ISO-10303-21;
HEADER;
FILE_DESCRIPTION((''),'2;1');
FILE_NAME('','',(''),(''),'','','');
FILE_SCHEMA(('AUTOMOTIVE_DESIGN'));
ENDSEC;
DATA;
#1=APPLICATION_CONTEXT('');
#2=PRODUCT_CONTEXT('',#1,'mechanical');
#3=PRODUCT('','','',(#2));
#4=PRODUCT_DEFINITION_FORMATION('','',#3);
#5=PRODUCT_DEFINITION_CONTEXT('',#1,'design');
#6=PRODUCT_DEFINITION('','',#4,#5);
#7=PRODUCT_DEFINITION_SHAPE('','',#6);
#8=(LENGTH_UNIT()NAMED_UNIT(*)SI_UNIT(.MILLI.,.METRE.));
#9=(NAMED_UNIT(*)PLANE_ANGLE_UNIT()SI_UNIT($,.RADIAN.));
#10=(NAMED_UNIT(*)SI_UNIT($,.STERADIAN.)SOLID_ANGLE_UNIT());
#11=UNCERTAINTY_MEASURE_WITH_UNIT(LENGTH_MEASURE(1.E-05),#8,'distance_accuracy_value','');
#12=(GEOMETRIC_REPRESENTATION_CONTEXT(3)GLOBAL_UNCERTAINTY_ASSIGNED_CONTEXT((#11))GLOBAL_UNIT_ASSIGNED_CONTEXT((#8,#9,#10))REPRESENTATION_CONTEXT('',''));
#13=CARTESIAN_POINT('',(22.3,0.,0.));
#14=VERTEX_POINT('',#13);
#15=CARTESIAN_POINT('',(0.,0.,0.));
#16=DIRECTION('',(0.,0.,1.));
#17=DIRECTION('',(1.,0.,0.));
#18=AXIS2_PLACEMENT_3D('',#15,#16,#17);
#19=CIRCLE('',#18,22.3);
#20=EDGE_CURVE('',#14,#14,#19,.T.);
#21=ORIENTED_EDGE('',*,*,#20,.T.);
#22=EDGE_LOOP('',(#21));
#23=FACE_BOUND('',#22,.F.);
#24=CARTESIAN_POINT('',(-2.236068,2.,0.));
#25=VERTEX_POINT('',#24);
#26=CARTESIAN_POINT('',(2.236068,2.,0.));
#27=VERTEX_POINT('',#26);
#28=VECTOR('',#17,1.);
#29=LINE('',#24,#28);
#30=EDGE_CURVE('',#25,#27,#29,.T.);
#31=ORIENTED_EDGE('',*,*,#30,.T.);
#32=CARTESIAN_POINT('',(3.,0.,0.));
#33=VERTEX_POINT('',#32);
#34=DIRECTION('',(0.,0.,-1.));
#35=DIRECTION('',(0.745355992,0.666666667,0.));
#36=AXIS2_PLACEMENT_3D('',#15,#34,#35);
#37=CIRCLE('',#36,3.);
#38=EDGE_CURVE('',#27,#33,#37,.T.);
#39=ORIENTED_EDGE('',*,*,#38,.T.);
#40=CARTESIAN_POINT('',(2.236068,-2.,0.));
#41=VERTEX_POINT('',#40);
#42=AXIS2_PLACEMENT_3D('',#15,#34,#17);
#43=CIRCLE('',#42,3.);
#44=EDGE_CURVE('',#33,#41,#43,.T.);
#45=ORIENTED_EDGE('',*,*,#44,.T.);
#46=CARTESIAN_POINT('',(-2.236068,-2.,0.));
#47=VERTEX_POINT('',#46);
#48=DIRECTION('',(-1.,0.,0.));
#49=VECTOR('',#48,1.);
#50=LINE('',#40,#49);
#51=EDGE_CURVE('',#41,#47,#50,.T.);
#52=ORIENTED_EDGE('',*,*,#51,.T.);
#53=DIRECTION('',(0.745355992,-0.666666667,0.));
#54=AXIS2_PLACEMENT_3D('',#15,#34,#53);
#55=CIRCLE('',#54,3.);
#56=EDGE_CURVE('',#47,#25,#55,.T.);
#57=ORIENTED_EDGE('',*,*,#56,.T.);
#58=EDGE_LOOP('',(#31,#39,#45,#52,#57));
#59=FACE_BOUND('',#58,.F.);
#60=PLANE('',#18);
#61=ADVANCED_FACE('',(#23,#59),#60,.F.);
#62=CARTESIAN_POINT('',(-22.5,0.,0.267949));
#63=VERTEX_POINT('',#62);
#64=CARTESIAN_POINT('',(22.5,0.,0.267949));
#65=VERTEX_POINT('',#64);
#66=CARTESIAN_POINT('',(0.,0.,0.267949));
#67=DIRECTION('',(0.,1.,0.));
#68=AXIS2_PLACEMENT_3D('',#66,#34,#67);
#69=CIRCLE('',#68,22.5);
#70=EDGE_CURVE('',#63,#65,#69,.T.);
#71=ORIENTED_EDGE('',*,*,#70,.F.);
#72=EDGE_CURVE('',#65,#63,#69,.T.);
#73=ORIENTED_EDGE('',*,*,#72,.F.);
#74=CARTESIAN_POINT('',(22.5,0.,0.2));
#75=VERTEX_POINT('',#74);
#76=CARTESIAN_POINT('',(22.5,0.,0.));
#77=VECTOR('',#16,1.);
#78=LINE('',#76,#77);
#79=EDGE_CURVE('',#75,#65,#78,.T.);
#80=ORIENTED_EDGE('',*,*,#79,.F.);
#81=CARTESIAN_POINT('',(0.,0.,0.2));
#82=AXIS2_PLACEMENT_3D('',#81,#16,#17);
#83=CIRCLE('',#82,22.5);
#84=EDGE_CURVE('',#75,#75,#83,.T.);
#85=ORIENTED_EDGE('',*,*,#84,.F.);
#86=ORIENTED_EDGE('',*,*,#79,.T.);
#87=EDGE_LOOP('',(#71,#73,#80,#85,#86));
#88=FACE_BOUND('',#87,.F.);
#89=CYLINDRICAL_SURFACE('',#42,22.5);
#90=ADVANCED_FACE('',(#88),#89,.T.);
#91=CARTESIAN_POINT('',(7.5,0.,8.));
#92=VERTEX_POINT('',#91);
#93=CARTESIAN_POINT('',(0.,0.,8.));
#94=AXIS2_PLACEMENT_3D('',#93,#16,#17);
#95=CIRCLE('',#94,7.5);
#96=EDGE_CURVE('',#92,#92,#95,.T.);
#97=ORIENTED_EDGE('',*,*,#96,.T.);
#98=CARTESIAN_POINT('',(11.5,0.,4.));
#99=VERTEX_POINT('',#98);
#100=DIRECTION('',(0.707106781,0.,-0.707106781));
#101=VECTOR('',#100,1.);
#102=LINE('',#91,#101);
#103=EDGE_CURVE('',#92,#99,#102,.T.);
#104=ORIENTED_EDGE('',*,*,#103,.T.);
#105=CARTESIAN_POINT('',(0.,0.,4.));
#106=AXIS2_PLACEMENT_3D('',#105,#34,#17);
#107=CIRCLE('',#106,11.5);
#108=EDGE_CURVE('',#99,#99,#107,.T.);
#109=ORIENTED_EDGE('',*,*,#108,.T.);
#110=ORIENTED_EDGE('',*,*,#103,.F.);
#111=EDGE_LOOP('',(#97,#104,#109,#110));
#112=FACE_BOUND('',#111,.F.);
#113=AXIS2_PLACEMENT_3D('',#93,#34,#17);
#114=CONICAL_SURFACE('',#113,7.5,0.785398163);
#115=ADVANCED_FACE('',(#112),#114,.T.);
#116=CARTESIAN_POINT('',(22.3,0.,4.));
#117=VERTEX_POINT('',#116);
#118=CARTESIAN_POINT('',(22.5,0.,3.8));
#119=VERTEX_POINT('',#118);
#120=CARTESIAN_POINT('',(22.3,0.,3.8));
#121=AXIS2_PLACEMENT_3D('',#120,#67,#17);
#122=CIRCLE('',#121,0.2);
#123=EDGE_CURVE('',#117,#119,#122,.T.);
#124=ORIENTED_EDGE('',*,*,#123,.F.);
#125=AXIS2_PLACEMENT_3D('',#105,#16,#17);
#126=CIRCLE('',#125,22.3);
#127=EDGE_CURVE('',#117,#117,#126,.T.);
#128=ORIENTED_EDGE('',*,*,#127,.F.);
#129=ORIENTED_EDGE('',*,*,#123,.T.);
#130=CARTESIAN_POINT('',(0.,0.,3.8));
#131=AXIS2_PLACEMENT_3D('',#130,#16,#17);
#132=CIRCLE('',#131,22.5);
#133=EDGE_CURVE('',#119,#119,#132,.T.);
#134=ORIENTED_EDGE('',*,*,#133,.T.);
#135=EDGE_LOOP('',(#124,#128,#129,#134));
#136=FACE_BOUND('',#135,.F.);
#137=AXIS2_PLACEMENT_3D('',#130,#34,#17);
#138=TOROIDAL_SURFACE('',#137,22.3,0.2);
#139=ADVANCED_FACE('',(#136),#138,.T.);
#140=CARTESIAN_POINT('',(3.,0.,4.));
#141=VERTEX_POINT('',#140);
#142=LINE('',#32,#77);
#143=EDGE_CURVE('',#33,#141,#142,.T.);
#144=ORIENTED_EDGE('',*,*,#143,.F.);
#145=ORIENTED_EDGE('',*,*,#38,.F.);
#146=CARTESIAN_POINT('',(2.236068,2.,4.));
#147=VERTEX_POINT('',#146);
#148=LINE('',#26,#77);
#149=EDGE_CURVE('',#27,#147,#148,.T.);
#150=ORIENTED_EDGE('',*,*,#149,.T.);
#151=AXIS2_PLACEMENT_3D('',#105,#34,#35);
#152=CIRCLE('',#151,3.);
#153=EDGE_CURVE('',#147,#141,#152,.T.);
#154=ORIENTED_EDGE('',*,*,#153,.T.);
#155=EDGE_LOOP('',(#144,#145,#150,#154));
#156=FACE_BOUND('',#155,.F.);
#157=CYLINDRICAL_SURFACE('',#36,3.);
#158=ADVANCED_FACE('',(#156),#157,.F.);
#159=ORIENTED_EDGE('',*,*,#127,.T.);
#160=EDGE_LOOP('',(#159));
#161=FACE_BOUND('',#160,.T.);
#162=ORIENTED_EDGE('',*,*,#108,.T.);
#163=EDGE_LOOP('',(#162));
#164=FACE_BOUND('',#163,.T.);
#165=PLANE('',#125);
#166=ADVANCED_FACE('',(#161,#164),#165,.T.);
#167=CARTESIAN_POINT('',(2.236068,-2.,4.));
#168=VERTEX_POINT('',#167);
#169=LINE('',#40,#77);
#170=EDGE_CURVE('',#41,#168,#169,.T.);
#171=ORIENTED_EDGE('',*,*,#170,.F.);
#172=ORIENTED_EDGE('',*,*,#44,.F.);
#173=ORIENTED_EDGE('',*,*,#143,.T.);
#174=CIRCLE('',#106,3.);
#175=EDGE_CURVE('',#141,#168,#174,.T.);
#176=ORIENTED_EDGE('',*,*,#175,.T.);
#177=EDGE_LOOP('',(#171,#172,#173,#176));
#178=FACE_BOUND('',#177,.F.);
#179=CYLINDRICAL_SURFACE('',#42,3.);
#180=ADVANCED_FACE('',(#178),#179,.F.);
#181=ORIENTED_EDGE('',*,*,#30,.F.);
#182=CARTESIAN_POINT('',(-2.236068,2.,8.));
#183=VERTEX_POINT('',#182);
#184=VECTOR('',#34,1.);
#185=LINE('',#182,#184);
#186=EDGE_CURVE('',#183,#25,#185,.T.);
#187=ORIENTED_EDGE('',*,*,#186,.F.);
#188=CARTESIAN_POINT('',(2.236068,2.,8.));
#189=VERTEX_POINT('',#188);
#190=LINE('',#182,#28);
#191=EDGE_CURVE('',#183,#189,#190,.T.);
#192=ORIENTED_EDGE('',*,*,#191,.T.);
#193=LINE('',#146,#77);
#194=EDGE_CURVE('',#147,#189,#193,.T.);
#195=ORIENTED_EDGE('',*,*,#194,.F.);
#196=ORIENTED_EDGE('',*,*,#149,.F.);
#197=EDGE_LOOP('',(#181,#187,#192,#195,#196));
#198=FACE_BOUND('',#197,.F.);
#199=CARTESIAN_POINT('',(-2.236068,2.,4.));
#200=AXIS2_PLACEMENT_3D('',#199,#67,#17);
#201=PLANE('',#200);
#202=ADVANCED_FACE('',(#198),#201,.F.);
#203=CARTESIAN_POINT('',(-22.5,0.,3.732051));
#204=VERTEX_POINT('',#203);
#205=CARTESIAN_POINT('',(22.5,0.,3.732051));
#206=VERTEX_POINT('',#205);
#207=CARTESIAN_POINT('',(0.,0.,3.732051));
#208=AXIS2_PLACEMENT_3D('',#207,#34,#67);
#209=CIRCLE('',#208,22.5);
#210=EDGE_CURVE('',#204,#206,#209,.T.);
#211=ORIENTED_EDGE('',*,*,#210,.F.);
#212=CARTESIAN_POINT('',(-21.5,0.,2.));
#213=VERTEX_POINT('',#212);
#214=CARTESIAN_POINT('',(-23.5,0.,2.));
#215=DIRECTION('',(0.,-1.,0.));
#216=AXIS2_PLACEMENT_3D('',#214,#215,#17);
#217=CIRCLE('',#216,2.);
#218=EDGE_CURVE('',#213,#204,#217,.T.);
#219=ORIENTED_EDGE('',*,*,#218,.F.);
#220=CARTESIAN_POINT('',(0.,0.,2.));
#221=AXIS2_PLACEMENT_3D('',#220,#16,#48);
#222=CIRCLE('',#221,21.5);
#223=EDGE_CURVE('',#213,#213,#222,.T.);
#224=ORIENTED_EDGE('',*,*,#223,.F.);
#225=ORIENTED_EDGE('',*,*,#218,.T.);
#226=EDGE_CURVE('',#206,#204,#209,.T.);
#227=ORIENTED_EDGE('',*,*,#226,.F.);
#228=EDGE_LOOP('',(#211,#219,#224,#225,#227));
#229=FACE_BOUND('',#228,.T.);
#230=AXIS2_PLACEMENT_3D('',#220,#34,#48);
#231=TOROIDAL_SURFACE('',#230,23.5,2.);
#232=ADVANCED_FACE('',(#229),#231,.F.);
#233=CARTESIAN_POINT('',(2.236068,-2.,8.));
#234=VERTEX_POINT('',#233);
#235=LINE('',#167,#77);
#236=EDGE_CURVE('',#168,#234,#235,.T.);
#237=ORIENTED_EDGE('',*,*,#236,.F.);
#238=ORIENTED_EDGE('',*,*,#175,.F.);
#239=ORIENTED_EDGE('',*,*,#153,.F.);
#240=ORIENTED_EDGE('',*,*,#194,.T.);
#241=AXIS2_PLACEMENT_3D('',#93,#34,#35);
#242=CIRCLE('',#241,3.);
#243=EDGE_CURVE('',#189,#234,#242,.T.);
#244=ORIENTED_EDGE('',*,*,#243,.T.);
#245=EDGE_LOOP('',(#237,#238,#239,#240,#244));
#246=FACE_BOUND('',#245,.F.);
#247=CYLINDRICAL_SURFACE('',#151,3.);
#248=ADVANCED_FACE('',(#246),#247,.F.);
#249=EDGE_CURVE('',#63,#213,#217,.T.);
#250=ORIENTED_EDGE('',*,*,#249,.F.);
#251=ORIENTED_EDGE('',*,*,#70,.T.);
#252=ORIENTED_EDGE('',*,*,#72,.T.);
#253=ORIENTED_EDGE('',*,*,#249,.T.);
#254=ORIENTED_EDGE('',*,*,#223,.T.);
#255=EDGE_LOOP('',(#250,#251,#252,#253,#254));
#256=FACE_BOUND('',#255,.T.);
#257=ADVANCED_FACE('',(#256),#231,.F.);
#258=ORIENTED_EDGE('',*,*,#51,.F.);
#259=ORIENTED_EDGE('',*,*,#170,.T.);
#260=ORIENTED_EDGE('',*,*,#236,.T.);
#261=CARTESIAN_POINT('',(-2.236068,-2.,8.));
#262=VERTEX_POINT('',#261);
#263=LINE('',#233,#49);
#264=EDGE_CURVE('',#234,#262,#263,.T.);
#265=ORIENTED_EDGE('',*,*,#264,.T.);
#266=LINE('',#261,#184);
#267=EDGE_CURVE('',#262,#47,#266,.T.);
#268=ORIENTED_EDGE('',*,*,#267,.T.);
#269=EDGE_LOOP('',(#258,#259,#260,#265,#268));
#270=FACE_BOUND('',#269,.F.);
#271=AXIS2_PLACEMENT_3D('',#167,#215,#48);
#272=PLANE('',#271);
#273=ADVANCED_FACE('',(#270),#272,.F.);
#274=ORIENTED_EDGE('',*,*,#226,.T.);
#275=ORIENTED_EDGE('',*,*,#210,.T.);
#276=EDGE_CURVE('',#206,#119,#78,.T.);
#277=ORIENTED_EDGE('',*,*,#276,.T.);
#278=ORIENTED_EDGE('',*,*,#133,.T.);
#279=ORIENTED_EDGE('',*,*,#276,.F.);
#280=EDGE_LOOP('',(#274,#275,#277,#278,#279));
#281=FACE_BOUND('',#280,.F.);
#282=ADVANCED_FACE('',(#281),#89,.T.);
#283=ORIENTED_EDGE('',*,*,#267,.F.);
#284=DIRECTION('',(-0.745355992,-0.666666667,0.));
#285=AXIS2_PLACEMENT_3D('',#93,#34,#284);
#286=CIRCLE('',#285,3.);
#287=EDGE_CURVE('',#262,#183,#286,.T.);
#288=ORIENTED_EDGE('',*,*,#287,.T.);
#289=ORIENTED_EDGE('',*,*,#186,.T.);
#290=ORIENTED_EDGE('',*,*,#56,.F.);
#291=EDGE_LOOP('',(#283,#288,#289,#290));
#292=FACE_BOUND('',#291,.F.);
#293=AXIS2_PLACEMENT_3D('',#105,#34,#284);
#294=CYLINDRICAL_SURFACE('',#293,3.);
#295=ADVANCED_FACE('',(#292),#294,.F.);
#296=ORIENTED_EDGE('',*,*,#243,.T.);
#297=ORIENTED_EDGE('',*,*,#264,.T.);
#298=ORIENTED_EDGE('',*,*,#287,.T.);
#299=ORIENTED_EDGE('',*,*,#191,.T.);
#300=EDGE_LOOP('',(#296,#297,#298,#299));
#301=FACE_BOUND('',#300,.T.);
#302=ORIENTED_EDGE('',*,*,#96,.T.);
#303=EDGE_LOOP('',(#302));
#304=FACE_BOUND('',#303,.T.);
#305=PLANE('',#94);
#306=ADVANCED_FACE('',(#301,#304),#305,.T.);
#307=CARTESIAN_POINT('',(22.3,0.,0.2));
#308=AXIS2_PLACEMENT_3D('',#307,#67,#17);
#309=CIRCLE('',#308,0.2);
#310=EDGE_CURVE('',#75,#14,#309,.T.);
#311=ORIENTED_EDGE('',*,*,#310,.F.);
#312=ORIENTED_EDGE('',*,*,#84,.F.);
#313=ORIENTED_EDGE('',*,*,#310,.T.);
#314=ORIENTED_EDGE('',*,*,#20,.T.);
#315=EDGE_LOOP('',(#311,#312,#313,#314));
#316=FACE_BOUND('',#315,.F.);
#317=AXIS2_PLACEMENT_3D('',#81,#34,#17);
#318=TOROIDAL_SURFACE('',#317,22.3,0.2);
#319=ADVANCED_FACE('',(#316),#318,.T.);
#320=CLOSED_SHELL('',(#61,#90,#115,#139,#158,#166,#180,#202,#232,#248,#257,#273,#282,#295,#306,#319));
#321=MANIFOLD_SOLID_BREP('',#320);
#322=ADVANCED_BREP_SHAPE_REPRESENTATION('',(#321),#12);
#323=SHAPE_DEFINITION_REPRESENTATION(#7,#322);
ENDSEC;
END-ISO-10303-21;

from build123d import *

# Parameters (mm, degrees)
F0_R     = 22.5
F1_DEPTH = 4
F2_R     = 2
F4_R     = 0.2
F5_R     = 12.5
F6_DEPTH = 4


# Not quite as in the source:
# - a fillet or chamfer that OpenCascade refuses, or shapes differently, is made with other operations: its cross-section is extruded or revolved along the edge and cut away or added


with BuildPart() as f1:
    # F0 (on Top) → F1 (new body)
    with BuildSketch(Plane.XY):
        Circle(F0_R)
        with BuildLine():
            ThreePointArc((2.2360679775, 2), (2.8025170769, 1.0704662693), (3, 0))
            ThreePointArc((3, 0), (2.8025170769, -1.0704662693), (2.2360679775, -2))
            ThreePointArc((2.2360679775, -2), (0, -3), (-2.2360679775, -2))
            ThreePointArc((-2.2360679775, -2), (-3, 0), (-2.2360679775, 2))
            ThreePointArc((-2.2360679775, 2), (0, 3), (2.2360679775, 2))
        make_face(mode=Mode.SUBTRACT)
        with BuildLine():
            ThreePointArc((-2.2360679775, -2), (0, -3), (2.2360679775, -2))
            Line((2.2360679775, -2), (-2.2360679775, -2))
        make_face()
        with BuildLine():
            Line((-2.2360679775, 2), (2.2360679775, 2))
            ThreePointArc((2.2360679775, 2), (0, 3), (-2.2360679775, 2))
        make_face()
    extrude(amount=F1_DEPTH)

    # F2 (on Front) → F3 (revolve, cut)
    with BuildSketch(Plane.XZ):
        with Locations((-23.5, 2)):
            Circle(F2_R)
    revolve(axis=Axis((0, 0, 4), (0, 0, 1)), mode=Mode.SUBTRACT)

    # F4
    f4_edges = [f1.edges().sort_by_distance(p)[0] for p in [
        (-22.5, 0, 4),
        (-22.5, 0, 0),
    ]]
    fillet(f4_edges, radius=F4_R)

    # F5 (on face) → F6 (join)
    with BuildSketch(Plane.XY.offset(4)):
        Circle(F5_R)
        with BuildLine():
            Line((2.2360679775, -2), (-2.2360679775, -2))
            ThreePointArc((-2.2360679775, -2), (-3, 0), (-2.2360679775, 2))
            Line((-2.2360679775, 2), (2.2360679775, 2))
            ThreePointArc((2.2360679775, 2), (3, 0), (2.2360679775, -2))
        make_face(mode=Mode.SUBTRACT)
    extrude(amount=F6_DEPTH)

    # F7: chamfer of 5 on 1 edges, made by hand


with BuildPart() as f7_tool2:
    # F7_s3 → F7_t4 (revolve)
    with BuildSketch(Plane.XZ):
        Polygon((7.5, 8), (12.5, 3), (12.5, 8), align=None)
    revolve(axis=Axis((0, 0, 8), (0, 0, 1)))

    split(bisect_by=Plane.XY.offset(4), keep=Keep.TOP)


with BuildPart() as f1_1:
    add(f1.part)

    # F7_t1: cut F7_tool2
    add(f7_tool2.part, mode=Mode.SUBTRACT)


solid = f1_1.part
